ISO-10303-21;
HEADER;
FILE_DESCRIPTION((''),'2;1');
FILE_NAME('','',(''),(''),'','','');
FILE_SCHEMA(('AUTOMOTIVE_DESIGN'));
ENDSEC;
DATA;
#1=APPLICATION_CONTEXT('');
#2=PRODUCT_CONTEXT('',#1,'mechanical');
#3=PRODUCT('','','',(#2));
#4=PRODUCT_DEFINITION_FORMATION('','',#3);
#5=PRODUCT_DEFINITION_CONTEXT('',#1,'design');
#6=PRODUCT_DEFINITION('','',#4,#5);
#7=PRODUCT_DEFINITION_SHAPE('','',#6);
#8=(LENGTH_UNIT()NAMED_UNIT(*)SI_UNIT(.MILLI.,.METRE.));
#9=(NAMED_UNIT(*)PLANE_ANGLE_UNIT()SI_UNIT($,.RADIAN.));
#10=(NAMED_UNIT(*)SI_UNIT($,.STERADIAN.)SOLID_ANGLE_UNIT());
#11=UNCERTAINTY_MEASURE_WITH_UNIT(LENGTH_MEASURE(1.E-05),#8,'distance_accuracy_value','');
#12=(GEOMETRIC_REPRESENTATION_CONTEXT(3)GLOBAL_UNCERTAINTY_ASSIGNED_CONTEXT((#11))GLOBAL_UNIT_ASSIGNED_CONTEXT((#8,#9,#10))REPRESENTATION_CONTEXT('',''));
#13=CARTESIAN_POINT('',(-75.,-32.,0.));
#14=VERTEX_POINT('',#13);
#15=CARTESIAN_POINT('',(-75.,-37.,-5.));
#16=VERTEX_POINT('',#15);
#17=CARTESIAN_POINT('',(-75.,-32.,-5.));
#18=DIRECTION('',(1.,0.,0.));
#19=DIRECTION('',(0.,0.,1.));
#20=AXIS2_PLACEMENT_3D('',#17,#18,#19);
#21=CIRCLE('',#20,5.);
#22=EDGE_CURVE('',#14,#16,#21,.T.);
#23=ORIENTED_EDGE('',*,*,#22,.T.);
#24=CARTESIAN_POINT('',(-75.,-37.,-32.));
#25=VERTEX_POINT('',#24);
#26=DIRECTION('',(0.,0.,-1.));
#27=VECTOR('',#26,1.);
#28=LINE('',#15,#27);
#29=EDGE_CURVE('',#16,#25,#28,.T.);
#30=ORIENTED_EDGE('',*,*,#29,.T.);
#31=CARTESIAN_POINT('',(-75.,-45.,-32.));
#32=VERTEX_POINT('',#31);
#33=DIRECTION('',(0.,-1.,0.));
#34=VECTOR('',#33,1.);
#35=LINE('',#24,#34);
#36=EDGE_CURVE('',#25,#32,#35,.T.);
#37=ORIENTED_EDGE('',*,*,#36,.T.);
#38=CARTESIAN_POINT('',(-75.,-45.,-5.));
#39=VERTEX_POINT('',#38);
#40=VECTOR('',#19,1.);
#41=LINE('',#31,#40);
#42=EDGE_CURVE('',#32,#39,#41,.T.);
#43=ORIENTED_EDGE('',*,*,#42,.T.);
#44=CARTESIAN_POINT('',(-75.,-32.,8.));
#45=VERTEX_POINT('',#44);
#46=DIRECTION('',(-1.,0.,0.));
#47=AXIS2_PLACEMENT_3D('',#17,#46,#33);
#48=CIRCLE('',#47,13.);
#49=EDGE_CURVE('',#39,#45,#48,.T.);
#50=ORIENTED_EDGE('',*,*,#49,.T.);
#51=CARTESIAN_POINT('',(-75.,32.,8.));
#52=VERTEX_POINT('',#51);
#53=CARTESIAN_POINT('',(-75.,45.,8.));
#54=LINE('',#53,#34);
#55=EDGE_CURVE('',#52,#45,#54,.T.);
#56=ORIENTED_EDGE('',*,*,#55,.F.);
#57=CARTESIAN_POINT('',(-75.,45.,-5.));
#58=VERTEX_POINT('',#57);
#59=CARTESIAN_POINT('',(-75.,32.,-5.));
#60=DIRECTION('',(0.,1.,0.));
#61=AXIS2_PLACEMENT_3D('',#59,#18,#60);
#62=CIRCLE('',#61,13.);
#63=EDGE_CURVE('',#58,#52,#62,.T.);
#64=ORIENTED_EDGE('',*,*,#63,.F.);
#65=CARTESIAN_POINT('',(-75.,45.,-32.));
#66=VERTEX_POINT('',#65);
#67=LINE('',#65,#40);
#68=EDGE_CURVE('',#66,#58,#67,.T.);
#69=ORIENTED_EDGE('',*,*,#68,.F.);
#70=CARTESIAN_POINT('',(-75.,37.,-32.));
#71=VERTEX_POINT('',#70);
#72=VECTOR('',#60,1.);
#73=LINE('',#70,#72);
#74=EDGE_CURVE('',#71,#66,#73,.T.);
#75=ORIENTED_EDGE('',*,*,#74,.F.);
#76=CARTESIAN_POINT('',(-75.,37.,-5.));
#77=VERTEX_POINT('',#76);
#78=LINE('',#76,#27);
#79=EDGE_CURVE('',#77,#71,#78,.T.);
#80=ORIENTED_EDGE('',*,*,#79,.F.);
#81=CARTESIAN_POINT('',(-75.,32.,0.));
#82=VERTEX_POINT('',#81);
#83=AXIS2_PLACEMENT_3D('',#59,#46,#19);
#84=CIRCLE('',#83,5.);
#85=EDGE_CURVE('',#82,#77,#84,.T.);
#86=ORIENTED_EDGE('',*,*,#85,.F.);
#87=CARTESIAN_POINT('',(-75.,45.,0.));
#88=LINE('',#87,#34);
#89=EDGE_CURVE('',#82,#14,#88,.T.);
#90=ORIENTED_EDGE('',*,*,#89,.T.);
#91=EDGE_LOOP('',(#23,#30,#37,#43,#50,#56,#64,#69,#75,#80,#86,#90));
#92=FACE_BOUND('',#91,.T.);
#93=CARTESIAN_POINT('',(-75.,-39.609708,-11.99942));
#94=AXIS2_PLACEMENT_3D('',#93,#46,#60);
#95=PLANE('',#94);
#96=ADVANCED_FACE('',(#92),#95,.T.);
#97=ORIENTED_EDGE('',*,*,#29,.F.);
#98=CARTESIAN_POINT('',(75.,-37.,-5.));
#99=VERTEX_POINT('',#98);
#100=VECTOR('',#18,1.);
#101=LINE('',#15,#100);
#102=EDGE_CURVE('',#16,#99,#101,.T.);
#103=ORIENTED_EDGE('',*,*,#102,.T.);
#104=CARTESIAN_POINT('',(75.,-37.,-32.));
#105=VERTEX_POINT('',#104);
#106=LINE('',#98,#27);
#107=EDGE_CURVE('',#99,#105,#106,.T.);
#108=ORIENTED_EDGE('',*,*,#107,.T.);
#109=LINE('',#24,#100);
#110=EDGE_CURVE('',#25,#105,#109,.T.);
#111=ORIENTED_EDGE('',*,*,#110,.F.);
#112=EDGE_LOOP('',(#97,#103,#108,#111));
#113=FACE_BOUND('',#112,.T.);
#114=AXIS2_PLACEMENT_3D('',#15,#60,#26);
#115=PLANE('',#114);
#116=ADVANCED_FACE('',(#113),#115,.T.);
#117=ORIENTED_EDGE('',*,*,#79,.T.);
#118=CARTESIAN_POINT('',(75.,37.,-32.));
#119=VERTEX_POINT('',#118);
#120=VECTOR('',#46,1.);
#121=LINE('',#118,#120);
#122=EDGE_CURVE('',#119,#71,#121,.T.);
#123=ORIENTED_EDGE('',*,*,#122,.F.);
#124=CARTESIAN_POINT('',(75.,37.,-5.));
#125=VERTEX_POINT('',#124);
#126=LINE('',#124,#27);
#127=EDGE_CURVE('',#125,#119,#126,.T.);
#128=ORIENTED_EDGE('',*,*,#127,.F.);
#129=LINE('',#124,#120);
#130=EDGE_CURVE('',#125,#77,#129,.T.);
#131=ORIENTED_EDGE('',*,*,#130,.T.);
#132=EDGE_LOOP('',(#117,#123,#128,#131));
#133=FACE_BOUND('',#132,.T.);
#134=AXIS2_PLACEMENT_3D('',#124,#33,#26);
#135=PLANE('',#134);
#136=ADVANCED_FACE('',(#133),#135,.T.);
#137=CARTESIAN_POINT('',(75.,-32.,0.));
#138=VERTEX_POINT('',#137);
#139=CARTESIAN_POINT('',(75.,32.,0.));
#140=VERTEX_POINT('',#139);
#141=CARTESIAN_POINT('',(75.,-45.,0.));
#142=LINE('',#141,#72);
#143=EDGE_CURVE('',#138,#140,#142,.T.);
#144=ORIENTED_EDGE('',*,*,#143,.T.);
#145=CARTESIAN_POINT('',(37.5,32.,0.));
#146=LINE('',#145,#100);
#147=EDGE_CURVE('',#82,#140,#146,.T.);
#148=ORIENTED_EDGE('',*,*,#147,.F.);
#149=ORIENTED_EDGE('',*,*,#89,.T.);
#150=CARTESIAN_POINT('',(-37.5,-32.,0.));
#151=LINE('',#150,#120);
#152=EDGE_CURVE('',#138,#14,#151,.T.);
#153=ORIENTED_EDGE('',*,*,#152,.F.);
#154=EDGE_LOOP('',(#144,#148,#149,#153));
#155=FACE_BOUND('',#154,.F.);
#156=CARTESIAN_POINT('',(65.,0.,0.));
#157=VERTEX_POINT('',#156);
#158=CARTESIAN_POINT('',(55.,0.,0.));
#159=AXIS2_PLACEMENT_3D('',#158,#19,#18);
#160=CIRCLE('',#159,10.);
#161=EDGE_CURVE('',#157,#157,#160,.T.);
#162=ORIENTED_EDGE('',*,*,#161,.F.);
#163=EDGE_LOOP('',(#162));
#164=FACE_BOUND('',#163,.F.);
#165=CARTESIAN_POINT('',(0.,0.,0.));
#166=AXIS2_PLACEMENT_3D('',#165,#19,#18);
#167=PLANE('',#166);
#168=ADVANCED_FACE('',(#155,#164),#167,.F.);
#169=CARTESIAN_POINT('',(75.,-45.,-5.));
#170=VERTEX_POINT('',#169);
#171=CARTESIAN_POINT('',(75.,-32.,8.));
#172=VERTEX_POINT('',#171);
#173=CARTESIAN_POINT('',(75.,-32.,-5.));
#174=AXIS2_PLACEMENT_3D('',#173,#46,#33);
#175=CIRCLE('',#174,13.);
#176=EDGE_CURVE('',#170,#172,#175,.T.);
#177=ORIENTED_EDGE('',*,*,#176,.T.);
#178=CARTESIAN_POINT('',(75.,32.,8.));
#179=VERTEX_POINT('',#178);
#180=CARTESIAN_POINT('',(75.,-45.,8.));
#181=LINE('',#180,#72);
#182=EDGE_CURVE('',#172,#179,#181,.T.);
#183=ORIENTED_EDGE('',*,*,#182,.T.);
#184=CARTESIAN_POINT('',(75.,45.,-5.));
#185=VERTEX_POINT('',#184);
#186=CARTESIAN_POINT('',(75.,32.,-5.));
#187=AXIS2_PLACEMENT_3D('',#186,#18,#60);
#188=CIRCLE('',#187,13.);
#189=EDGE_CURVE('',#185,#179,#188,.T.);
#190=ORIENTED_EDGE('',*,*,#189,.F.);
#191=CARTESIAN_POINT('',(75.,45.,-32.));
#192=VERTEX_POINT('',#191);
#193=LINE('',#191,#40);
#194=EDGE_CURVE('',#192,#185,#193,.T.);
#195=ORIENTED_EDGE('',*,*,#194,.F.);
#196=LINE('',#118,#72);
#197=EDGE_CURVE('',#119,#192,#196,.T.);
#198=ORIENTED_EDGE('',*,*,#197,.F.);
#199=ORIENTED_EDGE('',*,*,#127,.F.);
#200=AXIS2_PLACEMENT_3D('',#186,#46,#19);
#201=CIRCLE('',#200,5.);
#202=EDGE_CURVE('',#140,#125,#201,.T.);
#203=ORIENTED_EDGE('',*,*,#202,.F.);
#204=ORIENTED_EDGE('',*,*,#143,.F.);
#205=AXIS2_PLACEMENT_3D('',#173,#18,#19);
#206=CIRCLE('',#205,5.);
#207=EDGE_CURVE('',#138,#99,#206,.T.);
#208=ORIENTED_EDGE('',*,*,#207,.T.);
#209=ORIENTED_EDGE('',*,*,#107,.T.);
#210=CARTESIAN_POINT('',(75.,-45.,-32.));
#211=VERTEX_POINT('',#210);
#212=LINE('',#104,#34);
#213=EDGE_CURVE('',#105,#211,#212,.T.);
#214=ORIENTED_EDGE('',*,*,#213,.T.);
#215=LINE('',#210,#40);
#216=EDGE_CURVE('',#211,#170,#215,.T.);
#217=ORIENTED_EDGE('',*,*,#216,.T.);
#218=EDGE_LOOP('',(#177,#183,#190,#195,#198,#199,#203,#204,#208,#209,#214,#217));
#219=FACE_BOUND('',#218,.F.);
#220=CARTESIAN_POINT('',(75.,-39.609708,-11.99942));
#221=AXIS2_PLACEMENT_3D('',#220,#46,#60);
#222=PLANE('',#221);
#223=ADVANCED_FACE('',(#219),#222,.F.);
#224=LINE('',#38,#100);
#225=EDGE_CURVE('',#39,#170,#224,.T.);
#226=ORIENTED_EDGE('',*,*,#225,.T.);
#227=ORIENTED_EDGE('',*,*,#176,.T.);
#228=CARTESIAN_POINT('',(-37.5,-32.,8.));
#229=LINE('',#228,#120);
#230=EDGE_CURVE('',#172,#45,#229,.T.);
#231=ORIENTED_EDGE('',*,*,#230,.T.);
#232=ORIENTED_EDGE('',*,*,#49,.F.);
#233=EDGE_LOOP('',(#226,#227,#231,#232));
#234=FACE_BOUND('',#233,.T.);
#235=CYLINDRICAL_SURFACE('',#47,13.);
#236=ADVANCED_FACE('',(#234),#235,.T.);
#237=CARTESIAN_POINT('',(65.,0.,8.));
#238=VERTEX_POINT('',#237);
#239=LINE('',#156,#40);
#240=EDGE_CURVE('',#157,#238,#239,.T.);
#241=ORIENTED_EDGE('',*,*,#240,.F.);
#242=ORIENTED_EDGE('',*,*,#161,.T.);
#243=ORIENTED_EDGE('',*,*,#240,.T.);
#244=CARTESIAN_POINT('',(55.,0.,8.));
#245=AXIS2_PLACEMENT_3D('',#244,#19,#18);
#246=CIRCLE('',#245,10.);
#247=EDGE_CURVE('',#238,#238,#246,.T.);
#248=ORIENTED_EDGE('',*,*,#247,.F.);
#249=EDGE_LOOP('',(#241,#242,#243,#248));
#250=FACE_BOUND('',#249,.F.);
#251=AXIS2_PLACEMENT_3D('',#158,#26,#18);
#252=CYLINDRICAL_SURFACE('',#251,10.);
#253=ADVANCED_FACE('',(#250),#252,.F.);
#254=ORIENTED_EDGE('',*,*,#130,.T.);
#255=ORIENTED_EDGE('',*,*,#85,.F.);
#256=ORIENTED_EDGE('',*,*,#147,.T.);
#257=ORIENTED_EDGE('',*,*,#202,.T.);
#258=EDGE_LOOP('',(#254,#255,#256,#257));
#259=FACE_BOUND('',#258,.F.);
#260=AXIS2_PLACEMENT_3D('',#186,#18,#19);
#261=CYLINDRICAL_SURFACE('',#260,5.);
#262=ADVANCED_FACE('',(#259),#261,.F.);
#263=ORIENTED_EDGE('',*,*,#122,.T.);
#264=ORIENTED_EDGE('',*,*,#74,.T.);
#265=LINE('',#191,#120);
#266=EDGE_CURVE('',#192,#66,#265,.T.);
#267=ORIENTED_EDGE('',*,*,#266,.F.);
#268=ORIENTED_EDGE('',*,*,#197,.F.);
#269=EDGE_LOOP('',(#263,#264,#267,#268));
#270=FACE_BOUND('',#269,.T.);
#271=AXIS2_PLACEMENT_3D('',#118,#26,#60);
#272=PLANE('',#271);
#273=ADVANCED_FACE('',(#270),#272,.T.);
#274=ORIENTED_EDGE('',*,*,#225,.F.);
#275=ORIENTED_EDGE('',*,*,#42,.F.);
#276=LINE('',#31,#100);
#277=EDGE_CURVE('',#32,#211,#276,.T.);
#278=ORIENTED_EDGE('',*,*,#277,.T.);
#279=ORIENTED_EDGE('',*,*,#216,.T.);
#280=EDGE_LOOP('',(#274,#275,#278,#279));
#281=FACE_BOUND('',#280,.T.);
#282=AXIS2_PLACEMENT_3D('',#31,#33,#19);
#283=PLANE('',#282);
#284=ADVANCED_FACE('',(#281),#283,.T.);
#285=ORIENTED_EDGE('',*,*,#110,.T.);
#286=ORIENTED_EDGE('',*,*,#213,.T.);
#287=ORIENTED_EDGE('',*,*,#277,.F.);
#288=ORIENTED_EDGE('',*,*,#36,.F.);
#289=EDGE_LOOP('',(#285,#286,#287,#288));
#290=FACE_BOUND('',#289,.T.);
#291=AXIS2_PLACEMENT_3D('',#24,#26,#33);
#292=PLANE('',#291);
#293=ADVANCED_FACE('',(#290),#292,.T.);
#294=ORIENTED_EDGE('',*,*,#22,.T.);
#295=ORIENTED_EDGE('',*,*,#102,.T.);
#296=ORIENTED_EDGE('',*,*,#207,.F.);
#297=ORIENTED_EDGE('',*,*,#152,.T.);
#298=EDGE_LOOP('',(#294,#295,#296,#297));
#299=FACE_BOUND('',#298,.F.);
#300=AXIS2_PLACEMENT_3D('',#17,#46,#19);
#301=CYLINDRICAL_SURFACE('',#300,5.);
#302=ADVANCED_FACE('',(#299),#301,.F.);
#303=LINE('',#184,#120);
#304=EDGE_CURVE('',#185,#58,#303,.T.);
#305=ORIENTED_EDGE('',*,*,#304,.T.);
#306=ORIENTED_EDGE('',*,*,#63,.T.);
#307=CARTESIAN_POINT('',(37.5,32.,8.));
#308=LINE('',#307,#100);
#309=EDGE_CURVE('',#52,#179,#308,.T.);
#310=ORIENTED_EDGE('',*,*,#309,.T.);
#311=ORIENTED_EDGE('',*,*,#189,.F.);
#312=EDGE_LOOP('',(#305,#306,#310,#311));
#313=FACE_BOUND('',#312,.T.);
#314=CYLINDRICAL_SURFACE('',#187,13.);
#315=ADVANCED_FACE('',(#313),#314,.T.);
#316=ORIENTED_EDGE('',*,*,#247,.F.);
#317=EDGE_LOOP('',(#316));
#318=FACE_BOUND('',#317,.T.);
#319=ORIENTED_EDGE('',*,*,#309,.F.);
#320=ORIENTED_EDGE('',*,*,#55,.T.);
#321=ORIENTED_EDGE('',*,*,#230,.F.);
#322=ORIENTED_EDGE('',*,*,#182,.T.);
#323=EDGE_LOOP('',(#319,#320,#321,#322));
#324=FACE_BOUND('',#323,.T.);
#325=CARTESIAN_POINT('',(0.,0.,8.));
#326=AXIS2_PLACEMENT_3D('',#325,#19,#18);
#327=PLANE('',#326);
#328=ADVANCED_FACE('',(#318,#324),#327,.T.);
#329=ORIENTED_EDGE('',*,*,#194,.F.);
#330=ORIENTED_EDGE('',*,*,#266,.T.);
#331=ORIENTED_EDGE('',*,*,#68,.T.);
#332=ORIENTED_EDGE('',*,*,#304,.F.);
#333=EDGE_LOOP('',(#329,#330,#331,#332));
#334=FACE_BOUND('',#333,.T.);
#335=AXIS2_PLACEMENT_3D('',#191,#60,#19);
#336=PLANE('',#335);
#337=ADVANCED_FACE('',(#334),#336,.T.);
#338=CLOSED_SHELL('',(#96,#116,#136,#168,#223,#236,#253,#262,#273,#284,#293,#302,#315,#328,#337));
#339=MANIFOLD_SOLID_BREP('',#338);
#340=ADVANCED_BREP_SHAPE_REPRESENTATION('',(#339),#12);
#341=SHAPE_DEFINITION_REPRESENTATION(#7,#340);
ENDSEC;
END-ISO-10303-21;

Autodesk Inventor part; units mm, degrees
ref_plane "YZ Plane" through (0, 0, 0) normal (1, 0, 0) x (0, 1, 0)
ref_plane "XZ Plane" through (0, 0, 0) normal (0, 1, 0) x (-1, 0, 0)
ref_plane "XY Plane" through (0, 0, 0) normal (0, 0, 1) x (1, 0, 0)
sketch "Sketch1" plane through (0, 0, 0) normal (0, 0, 1) x (1, 0, 0)
  line L0 (-75, -45) -> (75, -45)
  line L1 (75, -45) -> (75, 45)
  line L2 (75, 45) -> (-75, 45)
  line L3 (-75, 45) -> (-75, -45)
  line L4 (-75, -45) -> (75, 45) construction
  line L5 (75, -45) -> (-75, 45) construction
  circle A0 centre (55, -25) radius 10
  circle A1 centre (55, 25) radius 10
  line L6 (0, 0) -> (75, 0) construction
  circle A2 centre (55, 0) radius 10
  dimension "d0" = 150
  dimension "d1" = 90
  dimension "d23" = 20
  dimension "d25" = 20
  dimension "d26" = 20
extrude "Plate1" add sketch "Sketch1" along normal blind 8 contours L3 L2 L1 L0 | A0 | A1
sketch "Sketch6" plane through (-75, -37, 8) normal (0, -1, 0) x (1, 0, 0)
  line L0 (150, 0) -> (0, 0)
  line L1 (0, 0) -> (0, -40)
  line L2 (0, -40) -> (150, -40)
  line L3 (150, -40) -> (150, 0)
edge flange "Flange2" height 40 angle 90 thickness 8 bend radius 5 thickness toward (0, -1, 0) relief round relief width 8 relief depth 4 corner gap 5 corner form 0 edges at (0, -45, 0) (0, 45, 0) wall of the first edge with corners at (75, -37, 8) (-75, -37, 8) (-75, -37, -32) (75, -37, -32)
bend "Bend2"
corner "Corner2"
equation "\"d26\" = d25"
equation "\"d2\" = Thickness"
equation "\"d30\" = BendReliefWidth"
equation "\"d31\" = BendReliefDepth"
equation "\"d32\" = MinimumRemnant"
equation "\"d33\" = TransitionRadius"
equation "\"d36\" = BendRadius"
equation "\"d37\" = CornerReliefSize"
equation "\"d38\" = GapSize"
equation "\"d39\" = JacobiRadiusSize"
equation "\"BendReliefWidth\" = Thickness"
equation "\"BendReliefDepth\" = 0.5 * Thickness"
equation "\"CornerReliefSize\" = 4 * Thickness"
equation "\"MinimumRemnant\" = 2 * Thickness"
equation "\"TransitionRadius\" = BendRadius"
equation "\"JacobiRadiusSize\" = BendRadius"
equation "\"GapSize\" = Thickness"
equation "\"Thickness\" = 8"
equation "\"BendRadius\" = 5"
properties part number "!!PRS 9696 leg floor channel_D1200" material "Steel"
